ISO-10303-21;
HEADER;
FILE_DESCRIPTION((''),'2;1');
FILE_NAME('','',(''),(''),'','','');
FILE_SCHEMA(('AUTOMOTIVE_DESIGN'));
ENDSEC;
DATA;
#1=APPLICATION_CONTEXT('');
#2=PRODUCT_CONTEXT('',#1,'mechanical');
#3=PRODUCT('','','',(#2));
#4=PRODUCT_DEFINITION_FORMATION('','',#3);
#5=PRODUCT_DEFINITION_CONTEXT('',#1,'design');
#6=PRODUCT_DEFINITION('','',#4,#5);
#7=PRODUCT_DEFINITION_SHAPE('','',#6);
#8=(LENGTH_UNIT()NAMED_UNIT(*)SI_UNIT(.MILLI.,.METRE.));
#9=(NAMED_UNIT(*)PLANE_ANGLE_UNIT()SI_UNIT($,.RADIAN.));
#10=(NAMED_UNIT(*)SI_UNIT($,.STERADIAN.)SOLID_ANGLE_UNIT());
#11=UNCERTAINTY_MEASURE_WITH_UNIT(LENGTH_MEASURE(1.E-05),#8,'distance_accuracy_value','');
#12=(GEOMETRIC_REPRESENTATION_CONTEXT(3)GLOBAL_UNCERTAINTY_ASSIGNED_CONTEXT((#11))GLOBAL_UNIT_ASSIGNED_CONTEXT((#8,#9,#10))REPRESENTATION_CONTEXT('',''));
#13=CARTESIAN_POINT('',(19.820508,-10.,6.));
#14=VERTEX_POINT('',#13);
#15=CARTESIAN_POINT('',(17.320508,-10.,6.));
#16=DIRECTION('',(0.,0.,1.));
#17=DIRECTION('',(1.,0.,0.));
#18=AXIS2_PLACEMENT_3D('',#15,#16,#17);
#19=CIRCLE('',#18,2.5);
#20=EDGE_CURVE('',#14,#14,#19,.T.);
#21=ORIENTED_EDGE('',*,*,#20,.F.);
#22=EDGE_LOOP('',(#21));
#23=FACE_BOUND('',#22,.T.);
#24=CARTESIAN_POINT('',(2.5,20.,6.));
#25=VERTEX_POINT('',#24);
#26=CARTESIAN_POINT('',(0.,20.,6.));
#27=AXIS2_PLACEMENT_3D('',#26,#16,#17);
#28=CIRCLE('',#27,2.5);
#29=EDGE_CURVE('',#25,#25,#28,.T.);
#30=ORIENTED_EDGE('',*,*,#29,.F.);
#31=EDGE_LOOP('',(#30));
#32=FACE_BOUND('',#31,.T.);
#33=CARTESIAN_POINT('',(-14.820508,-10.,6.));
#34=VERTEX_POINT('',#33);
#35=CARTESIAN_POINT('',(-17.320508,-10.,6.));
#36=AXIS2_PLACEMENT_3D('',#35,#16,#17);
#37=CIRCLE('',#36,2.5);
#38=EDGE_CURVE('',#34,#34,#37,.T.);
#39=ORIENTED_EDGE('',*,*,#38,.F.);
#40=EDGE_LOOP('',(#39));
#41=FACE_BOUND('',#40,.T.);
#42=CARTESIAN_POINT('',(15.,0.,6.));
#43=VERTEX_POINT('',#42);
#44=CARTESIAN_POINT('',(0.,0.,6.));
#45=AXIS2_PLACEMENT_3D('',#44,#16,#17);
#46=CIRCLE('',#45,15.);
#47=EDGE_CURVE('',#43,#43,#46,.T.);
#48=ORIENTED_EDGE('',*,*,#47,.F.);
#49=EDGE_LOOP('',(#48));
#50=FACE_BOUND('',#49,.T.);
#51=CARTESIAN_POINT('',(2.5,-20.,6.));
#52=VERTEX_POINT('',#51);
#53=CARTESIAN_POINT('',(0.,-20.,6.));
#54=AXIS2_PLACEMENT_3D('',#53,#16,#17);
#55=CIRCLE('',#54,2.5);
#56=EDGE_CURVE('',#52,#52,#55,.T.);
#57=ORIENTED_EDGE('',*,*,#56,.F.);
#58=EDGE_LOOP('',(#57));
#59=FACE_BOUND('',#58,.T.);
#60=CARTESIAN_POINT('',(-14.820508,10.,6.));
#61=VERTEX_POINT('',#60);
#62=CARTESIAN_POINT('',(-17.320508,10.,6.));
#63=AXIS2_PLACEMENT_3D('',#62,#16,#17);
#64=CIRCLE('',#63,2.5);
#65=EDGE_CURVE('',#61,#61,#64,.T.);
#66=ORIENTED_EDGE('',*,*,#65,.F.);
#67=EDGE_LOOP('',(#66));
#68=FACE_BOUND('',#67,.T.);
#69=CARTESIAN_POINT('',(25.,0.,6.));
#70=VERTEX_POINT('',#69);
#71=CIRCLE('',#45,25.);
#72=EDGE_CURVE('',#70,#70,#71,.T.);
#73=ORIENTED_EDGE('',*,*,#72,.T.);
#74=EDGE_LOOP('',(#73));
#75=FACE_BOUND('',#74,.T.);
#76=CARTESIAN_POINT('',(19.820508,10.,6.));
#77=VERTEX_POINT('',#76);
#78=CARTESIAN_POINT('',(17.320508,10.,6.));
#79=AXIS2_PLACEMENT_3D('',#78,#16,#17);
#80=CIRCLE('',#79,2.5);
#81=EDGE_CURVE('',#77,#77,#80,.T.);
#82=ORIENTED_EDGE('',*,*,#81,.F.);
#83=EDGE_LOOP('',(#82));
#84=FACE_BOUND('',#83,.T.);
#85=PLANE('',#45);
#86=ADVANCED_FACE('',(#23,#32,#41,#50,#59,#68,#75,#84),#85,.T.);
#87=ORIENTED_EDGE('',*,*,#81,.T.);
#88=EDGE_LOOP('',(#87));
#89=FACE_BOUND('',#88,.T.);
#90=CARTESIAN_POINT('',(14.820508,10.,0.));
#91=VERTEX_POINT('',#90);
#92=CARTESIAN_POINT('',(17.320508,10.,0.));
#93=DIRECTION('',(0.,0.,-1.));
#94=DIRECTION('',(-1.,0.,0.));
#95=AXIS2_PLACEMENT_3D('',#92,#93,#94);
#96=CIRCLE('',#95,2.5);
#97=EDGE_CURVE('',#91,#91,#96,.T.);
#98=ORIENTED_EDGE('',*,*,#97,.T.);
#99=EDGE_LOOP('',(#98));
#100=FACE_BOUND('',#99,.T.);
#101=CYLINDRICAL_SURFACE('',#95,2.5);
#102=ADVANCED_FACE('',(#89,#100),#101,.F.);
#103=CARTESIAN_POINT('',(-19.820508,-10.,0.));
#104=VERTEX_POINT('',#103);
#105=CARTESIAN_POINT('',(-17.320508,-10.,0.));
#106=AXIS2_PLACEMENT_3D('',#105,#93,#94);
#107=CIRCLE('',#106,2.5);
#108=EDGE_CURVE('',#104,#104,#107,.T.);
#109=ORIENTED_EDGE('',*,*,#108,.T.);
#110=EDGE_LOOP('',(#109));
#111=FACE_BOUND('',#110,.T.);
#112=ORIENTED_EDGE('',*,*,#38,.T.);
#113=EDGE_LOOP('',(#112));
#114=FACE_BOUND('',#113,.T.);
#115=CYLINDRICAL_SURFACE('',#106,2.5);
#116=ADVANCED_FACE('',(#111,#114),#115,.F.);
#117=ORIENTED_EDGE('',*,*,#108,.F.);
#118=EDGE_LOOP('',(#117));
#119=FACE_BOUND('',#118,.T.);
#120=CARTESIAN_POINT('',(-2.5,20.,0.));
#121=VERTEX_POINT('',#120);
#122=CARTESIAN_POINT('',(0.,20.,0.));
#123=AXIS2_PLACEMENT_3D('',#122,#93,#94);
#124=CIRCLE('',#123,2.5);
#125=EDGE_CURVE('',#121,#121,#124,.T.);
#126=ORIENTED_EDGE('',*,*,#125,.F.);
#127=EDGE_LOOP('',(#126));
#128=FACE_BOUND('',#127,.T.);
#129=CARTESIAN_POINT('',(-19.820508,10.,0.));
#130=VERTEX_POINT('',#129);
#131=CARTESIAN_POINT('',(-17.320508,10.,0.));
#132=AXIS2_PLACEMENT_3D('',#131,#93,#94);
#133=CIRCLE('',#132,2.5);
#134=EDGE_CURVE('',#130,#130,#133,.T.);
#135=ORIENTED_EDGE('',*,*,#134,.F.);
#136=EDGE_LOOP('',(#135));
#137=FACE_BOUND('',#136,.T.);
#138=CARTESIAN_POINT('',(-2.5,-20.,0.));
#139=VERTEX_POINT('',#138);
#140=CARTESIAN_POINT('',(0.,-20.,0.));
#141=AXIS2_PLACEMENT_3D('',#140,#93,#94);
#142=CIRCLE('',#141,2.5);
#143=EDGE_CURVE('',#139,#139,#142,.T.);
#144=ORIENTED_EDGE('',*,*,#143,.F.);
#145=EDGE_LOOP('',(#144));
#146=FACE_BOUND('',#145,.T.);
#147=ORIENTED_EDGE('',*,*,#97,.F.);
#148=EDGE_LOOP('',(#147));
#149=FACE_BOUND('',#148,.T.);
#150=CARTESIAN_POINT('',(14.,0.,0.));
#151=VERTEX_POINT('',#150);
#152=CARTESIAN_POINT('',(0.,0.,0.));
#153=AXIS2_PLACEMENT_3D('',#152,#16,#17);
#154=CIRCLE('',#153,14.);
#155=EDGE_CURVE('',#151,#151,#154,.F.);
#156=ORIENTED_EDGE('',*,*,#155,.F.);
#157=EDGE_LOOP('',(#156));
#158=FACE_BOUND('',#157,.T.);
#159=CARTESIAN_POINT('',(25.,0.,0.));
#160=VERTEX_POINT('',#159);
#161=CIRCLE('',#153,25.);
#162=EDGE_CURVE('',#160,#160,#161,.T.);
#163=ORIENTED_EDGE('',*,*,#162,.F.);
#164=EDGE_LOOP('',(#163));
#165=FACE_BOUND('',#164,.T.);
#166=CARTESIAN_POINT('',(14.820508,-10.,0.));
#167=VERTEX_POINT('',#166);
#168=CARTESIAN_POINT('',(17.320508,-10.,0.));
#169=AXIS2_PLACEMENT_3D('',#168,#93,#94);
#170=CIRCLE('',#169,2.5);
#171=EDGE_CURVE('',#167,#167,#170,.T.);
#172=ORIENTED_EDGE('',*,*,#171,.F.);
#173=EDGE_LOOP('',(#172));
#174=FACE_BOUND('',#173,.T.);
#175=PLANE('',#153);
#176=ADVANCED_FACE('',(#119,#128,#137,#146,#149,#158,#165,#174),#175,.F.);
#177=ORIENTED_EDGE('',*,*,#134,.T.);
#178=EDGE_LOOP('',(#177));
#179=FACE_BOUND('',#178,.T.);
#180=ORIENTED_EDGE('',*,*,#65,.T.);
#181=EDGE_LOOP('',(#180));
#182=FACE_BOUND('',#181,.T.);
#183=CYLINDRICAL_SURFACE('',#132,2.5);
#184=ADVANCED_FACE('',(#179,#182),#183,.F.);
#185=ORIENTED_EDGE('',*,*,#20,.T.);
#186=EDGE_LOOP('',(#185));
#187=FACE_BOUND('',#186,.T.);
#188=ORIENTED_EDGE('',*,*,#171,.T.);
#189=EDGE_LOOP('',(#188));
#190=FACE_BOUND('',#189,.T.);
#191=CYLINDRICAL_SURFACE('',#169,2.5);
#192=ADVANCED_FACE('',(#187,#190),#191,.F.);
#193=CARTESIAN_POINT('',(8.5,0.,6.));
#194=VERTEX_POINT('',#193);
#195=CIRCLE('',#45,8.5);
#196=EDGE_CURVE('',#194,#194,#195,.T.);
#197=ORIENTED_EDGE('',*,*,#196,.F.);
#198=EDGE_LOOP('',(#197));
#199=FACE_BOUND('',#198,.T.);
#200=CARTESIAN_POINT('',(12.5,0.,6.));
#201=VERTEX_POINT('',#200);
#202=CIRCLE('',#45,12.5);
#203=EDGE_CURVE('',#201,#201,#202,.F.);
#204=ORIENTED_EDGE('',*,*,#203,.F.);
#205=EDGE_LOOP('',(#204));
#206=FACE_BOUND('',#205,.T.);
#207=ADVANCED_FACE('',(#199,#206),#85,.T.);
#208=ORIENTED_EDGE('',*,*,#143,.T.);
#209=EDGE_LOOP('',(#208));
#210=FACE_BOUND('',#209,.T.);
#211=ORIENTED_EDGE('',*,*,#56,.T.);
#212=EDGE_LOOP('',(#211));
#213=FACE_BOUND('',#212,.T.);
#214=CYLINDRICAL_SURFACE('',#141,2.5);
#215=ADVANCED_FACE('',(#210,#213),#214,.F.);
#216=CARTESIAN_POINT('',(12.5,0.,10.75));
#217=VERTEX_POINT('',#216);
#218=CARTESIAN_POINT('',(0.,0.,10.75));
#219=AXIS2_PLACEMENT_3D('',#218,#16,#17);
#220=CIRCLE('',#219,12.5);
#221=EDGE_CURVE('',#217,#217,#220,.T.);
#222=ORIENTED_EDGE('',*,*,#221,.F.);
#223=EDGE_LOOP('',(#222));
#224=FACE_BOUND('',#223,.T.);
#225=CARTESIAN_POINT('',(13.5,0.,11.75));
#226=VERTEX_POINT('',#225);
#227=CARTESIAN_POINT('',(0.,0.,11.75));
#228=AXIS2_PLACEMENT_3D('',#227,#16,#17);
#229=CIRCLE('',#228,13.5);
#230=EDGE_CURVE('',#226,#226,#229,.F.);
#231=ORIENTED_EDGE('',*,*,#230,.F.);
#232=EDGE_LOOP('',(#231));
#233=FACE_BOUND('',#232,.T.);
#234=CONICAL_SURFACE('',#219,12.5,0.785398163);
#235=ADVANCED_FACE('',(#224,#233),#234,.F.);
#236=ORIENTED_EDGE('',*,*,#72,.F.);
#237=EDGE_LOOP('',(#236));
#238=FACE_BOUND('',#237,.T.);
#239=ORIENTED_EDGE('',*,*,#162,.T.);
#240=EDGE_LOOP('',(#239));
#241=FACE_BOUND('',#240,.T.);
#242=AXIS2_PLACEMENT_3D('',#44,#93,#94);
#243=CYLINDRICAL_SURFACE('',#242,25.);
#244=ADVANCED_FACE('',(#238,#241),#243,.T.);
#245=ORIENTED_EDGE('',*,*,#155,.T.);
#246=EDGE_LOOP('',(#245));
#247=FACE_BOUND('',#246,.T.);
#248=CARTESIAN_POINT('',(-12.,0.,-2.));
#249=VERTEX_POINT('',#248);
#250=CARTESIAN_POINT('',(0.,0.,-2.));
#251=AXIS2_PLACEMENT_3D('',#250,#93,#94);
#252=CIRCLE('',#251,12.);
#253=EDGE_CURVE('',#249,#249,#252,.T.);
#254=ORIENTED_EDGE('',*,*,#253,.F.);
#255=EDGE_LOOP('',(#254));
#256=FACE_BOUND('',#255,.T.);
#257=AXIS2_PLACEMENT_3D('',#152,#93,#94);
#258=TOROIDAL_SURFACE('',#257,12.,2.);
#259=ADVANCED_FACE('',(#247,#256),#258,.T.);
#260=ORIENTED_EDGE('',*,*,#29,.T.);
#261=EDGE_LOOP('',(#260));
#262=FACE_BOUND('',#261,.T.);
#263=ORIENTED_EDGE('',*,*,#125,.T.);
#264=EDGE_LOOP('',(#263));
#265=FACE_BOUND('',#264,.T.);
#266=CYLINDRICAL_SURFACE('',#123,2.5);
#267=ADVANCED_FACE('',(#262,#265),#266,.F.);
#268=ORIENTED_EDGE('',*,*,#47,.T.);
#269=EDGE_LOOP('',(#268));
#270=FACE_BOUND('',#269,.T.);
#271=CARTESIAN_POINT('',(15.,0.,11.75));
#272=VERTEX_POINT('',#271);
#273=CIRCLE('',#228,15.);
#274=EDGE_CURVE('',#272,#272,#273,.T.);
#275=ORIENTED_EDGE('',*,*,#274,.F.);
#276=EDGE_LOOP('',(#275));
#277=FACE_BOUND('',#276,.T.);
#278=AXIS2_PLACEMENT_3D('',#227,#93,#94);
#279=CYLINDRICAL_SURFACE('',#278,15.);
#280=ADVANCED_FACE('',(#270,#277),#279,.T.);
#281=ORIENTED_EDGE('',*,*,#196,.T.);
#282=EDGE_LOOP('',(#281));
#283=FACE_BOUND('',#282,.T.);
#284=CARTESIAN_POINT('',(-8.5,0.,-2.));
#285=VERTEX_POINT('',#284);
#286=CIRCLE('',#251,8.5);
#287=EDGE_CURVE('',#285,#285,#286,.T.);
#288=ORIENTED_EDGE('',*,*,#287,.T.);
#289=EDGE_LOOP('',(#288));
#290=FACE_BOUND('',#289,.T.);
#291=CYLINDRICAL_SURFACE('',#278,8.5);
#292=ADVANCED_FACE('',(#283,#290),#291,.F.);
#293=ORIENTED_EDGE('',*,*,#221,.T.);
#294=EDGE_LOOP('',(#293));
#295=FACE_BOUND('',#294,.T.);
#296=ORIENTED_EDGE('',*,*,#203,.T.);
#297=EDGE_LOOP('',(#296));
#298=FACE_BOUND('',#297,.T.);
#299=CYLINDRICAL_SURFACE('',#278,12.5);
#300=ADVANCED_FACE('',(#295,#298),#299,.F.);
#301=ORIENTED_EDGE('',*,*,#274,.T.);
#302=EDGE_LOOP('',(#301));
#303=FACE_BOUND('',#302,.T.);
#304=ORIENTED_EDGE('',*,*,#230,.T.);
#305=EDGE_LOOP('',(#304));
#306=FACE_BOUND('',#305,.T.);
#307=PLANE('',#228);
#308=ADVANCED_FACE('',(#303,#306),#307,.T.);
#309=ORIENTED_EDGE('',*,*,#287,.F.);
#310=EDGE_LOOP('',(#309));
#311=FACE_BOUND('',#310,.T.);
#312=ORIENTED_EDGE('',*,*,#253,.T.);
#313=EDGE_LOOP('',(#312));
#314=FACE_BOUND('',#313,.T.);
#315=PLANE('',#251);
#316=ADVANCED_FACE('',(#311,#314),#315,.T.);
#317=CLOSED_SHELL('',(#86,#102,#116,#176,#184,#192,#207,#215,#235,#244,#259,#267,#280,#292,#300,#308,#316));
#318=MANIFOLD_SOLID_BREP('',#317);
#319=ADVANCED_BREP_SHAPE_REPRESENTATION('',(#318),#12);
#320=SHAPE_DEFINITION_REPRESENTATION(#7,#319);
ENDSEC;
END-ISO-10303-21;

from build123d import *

# Parameters (mm, degrees)
SKETCH1_R                = 25
BOSS_EXTRUDE1_DEPTH      = 6
SKETCH2_R                = 15
SKETCH2_R_2              = 12.5
BOSS_EXTRUDE2_DEPTH      = 5.75
SKETCH3_R                = 14
BOSS_EXTRUDE3_DEPTH      = 2
FILLET1_R                = 2
CHAMFER1_SIZE            = 1
F_5_0_5_DIAMETER_HOLE1_D = 5
CIRPATTERN1_COUNT        = 6
SKETCH10_R               = 8.5
CUT_EXTRUDE1_DEPTH       = 38.934977264


with BuildPart() as part:
    # Sketch1 → Boss-Extrude1 (new body)
    with BuildSketch(Plane.XY):
        Circle(SKETCH1_R)
    extrude(amount=BOSS_EXTRUDE1_DEPTH)

    # Sketch2 → Boss-Extrude2 (add)
    with BuildSketch(Plane.XY.offset(6)):
        Circle(SKETCH2_R)
        Circle(SKETCH2_R_2, mode=Mode.SUBTRACT)
    extrude(amount=BOSS_EXTRUDE2_DEPTH)

    # Sketch3 → Boss-Extrude3 (add)
    with BuildSketch(Plane(origin=(0, 0, 0), x_dir=(-1, 0, 0), z_dir=(0, 0, -1))):
        with Locations(Location((0, 0, 0), (0, 0, 180))):
            Circle(SKETCH3_R)
    extrude(amount=BOSS_EXTRUDE3_DEPTH)

    # Fillet1
    fillet1_edges = [part.edges().sort_by_distance(p)[0] for p in [
        (-14, 0, -2),
    ]]
    fillet(fillet1_edges, radius=FILLET1_R - 0.0001)  # a hair under: the kernel refuses the full size

    # Chamfer1
    chamfer1_edges = [part.edges().sort_by_distance(p)[0] for p in [
        (-12.5, 0, 11.75),
    ]]
    chamfer(chamfer1_edges, length=CHAMFER1_SIZE)

    # Ø5.0 (5) Diameter Hole1 (through all)
    with Locations(Plane(origin=(0, 0, 0), x_dir=(-1, 0, 0), z_dir=(0, 0, -1))):
        with Locations((0, 20)):
            f_5_0_5_diameter_hole1 = Hole(F_5_0_5_DIAMETER_HOLE1_D / 2)

    # CirPattern1: Ø5.0 (5) Diameter Hole1 ×6 about axis
    cirpattern1_axis = Axis((0, 0, 0), (0, 0, 1))
    for i in range(1, CIRPATTERN1_COUNT):
        add(f_5_0_5_diameter_hole1.rotate(cirpattern1_axis, i * 360 / CIRPATTERN1_COUNT), mode=Mode.SUBTRACT)

    # Sketch10 → Cut-Extrude1 (cut, through all)
    with BuildSketch(Plane(origin=(0, 0, -2), x_dir=(-1, 0, 0), z_dir=(0, 0, -1))):
        Circle(SKETCH10_R)
    extrude(amount=-CUT_EXTRUDE1_DEPTH, mode=Mode.SUBTRACT)


solid = part.part
